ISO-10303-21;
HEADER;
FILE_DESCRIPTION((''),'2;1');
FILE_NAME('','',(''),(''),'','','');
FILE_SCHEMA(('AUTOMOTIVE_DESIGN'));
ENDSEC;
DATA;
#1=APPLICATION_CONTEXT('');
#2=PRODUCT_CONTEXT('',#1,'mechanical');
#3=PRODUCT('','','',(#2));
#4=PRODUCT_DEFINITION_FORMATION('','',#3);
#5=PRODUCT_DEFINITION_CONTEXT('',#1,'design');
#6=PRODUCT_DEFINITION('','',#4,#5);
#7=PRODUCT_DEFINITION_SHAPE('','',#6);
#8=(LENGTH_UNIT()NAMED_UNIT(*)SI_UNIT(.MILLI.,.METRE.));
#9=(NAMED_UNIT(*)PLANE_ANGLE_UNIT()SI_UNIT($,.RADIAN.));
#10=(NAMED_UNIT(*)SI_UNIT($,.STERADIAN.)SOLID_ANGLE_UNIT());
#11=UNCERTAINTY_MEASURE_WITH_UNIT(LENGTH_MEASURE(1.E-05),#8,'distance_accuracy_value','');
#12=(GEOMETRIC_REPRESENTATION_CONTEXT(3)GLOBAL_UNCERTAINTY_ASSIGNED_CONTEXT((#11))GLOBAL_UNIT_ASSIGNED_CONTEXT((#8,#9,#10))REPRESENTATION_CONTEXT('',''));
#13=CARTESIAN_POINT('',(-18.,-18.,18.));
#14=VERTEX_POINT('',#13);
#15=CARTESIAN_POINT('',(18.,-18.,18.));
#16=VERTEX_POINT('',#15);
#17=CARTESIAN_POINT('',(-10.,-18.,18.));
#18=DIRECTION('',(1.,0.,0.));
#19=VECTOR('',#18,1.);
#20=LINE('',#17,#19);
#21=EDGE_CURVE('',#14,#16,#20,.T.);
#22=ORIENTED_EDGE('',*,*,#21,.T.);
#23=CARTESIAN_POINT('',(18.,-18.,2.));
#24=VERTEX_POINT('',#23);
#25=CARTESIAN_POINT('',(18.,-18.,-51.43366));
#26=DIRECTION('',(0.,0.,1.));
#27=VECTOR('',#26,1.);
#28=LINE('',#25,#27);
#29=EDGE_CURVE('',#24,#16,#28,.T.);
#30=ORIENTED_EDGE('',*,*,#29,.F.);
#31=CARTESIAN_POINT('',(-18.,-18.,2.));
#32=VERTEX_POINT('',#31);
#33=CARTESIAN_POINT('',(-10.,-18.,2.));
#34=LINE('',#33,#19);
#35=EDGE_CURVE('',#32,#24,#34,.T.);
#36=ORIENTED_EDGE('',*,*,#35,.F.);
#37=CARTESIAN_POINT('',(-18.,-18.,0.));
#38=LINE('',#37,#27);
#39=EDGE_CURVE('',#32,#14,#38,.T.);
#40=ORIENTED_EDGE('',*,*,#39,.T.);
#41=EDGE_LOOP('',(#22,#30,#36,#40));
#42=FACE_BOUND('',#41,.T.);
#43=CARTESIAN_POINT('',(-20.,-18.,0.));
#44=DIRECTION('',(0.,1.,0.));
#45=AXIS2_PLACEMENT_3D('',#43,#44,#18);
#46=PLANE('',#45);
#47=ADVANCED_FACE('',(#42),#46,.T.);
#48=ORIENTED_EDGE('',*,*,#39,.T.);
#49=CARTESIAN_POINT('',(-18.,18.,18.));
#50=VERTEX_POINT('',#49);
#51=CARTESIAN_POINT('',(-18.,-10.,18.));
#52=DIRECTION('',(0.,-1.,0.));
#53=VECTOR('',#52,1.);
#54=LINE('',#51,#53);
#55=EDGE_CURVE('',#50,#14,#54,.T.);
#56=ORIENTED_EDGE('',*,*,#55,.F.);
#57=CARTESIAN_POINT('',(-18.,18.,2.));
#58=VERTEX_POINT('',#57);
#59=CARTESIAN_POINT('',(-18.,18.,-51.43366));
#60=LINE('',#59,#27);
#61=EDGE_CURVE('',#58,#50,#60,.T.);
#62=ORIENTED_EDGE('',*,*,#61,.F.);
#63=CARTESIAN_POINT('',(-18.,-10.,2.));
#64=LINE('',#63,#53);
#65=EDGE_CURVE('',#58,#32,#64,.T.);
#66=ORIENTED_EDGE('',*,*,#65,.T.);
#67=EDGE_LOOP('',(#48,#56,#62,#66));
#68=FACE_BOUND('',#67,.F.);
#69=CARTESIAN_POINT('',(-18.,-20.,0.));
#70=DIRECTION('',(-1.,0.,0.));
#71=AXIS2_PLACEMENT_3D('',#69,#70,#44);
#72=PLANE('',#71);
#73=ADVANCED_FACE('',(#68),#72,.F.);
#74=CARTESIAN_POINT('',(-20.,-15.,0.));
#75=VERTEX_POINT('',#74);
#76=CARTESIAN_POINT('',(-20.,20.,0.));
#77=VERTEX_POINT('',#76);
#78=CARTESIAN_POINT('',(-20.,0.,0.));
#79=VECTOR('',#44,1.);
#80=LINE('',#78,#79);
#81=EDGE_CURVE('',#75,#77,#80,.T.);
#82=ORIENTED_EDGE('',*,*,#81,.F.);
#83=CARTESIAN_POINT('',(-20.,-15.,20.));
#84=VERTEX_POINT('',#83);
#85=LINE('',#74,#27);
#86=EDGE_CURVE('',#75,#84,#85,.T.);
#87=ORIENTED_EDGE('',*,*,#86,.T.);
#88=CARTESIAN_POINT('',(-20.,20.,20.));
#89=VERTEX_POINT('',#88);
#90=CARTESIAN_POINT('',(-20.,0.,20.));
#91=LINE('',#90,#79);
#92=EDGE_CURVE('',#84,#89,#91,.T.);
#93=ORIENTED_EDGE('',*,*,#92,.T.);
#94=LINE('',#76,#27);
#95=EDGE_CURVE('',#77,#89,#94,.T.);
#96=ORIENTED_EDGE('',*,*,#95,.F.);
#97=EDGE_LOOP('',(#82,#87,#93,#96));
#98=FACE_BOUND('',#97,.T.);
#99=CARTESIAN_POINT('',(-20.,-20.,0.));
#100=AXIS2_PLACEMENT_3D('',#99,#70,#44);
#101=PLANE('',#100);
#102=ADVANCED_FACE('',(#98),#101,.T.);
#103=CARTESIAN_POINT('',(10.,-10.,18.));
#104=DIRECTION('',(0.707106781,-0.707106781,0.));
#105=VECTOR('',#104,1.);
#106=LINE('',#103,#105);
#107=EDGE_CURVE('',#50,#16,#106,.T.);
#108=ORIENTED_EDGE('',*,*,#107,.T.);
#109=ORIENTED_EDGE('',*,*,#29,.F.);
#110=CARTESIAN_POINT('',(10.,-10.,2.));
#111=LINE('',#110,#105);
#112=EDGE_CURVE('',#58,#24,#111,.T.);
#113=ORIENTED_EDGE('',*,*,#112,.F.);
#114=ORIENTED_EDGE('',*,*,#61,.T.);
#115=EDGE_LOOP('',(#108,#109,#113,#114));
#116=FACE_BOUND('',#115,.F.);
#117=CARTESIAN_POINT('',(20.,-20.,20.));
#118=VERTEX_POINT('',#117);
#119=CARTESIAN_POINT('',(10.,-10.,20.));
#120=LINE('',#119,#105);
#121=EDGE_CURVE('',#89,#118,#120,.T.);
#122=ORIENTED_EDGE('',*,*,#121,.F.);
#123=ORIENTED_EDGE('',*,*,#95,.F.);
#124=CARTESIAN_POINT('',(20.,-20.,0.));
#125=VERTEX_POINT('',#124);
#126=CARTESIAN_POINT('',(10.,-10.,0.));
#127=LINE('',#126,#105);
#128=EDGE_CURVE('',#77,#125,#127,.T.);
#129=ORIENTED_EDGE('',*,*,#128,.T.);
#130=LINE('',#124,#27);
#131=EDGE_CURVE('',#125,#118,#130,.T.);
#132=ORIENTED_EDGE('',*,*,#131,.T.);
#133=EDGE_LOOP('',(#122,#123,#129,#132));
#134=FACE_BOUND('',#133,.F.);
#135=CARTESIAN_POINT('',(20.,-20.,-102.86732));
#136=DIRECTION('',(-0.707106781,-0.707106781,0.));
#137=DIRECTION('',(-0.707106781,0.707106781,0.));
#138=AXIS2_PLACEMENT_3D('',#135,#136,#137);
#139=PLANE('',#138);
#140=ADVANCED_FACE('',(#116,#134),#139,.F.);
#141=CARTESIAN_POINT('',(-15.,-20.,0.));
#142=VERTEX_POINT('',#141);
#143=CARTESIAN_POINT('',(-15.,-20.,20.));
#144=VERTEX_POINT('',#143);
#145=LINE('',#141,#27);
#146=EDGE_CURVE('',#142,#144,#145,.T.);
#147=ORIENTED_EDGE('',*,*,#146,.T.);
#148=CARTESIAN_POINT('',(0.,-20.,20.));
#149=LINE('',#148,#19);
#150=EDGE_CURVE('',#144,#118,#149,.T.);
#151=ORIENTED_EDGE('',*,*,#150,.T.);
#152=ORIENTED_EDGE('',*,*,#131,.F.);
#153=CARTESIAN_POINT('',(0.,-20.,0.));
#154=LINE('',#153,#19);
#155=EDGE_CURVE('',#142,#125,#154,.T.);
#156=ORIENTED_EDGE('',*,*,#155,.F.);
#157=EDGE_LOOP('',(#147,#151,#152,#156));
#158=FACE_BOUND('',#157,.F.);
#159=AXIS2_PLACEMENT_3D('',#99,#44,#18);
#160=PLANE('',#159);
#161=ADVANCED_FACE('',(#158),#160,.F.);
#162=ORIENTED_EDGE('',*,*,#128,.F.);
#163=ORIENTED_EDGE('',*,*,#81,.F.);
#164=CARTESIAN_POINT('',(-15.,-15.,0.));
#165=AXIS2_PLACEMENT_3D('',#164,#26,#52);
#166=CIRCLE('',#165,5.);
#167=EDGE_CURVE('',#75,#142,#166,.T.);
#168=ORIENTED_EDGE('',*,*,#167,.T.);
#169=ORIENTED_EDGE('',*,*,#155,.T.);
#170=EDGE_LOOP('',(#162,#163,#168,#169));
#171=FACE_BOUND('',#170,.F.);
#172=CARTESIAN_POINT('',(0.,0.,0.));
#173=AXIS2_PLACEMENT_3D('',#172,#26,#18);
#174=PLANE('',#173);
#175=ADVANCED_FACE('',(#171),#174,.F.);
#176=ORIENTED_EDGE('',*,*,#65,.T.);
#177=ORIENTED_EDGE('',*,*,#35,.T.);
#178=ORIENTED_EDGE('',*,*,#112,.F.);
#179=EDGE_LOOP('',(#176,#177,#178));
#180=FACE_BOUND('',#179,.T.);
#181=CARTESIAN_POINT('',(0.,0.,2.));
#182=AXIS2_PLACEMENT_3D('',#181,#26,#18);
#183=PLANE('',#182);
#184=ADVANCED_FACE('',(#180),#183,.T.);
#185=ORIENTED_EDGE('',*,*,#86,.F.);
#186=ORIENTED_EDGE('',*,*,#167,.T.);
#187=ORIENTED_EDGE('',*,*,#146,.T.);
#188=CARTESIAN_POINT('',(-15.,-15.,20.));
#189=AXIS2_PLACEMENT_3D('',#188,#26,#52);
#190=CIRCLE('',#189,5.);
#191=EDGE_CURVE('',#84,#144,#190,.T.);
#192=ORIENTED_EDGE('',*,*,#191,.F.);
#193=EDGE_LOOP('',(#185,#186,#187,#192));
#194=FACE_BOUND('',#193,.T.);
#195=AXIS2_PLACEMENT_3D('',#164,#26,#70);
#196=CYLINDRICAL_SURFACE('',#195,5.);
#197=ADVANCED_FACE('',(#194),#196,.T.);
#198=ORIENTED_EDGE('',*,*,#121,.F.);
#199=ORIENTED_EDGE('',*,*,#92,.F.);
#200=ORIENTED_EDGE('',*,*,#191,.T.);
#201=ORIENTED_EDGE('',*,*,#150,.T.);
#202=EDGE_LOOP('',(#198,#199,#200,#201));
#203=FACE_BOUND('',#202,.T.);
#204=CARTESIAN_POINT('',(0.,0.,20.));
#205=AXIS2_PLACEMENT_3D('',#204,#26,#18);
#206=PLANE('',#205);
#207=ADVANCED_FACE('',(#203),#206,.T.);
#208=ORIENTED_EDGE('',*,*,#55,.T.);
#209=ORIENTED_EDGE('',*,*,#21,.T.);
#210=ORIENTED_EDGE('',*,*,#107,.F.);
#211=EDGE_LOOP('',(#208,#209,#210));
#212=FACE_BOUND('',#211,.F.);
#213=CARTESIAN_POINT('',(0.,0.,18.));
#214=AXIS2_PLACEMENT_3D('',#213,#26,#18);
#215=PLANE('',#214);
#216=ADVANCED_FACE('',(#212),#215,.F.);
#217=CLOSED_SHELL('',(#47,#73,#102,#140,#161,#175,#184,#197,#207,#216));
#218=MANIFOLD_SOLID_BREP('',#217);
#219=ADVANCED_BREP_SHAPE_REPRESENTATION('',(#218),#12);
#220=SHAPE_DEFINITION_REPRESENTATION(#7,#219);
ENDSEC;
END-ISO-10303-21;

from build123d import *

# Parameters (mm, degrees)
F0_W        = 40
F0_H        = 40
F1_DEPTH    = 20
F2_T        = -2
F3_T1_DEPTH = 207.7346390373
F4_R        = 5


# Not quite as in the source:
# - a fillet or chamfer that OpenCascade refuses, or shapes differently, is made with other operations: its cross-section is extruded or revolved along the edge and cut away or added


with BuildPart() as f1:
    # F0 (on Top) → F1 (new body)
    with BuildSketch(Plane.XY):
        Rectangle(F0_W, F0_H)
    extrude(amount=F1_DEPTH)

    # F2
    f2_openings = [f1.faces().sort_by_distance(p)[0] for p in [
        (20, 0, 10),
        (0, 20, 10),
    ]]
    offset(amount=F2_T, openings=f2_openings)

    # F3: chamfer of 40 on 6 edges, made by hand

    # F3_s2 → F3_t1 (cut)
    with BuildSketch(Plane.XY.offset(-102.8673195186)):
        Polygon((20, -20), (-20, 20), (20, 20), align=None)
    extrude(amount=F3_T1_DEPTH, mode=Mode.SUBTRACT)

    # F4
    f4_edges = [f1.edges().sort_by_distance(p)[0] for p in [
        (-20, -20, 10),
    ]]
    fillet(f4_edges, radius=F4_R)


solid = f1.part
